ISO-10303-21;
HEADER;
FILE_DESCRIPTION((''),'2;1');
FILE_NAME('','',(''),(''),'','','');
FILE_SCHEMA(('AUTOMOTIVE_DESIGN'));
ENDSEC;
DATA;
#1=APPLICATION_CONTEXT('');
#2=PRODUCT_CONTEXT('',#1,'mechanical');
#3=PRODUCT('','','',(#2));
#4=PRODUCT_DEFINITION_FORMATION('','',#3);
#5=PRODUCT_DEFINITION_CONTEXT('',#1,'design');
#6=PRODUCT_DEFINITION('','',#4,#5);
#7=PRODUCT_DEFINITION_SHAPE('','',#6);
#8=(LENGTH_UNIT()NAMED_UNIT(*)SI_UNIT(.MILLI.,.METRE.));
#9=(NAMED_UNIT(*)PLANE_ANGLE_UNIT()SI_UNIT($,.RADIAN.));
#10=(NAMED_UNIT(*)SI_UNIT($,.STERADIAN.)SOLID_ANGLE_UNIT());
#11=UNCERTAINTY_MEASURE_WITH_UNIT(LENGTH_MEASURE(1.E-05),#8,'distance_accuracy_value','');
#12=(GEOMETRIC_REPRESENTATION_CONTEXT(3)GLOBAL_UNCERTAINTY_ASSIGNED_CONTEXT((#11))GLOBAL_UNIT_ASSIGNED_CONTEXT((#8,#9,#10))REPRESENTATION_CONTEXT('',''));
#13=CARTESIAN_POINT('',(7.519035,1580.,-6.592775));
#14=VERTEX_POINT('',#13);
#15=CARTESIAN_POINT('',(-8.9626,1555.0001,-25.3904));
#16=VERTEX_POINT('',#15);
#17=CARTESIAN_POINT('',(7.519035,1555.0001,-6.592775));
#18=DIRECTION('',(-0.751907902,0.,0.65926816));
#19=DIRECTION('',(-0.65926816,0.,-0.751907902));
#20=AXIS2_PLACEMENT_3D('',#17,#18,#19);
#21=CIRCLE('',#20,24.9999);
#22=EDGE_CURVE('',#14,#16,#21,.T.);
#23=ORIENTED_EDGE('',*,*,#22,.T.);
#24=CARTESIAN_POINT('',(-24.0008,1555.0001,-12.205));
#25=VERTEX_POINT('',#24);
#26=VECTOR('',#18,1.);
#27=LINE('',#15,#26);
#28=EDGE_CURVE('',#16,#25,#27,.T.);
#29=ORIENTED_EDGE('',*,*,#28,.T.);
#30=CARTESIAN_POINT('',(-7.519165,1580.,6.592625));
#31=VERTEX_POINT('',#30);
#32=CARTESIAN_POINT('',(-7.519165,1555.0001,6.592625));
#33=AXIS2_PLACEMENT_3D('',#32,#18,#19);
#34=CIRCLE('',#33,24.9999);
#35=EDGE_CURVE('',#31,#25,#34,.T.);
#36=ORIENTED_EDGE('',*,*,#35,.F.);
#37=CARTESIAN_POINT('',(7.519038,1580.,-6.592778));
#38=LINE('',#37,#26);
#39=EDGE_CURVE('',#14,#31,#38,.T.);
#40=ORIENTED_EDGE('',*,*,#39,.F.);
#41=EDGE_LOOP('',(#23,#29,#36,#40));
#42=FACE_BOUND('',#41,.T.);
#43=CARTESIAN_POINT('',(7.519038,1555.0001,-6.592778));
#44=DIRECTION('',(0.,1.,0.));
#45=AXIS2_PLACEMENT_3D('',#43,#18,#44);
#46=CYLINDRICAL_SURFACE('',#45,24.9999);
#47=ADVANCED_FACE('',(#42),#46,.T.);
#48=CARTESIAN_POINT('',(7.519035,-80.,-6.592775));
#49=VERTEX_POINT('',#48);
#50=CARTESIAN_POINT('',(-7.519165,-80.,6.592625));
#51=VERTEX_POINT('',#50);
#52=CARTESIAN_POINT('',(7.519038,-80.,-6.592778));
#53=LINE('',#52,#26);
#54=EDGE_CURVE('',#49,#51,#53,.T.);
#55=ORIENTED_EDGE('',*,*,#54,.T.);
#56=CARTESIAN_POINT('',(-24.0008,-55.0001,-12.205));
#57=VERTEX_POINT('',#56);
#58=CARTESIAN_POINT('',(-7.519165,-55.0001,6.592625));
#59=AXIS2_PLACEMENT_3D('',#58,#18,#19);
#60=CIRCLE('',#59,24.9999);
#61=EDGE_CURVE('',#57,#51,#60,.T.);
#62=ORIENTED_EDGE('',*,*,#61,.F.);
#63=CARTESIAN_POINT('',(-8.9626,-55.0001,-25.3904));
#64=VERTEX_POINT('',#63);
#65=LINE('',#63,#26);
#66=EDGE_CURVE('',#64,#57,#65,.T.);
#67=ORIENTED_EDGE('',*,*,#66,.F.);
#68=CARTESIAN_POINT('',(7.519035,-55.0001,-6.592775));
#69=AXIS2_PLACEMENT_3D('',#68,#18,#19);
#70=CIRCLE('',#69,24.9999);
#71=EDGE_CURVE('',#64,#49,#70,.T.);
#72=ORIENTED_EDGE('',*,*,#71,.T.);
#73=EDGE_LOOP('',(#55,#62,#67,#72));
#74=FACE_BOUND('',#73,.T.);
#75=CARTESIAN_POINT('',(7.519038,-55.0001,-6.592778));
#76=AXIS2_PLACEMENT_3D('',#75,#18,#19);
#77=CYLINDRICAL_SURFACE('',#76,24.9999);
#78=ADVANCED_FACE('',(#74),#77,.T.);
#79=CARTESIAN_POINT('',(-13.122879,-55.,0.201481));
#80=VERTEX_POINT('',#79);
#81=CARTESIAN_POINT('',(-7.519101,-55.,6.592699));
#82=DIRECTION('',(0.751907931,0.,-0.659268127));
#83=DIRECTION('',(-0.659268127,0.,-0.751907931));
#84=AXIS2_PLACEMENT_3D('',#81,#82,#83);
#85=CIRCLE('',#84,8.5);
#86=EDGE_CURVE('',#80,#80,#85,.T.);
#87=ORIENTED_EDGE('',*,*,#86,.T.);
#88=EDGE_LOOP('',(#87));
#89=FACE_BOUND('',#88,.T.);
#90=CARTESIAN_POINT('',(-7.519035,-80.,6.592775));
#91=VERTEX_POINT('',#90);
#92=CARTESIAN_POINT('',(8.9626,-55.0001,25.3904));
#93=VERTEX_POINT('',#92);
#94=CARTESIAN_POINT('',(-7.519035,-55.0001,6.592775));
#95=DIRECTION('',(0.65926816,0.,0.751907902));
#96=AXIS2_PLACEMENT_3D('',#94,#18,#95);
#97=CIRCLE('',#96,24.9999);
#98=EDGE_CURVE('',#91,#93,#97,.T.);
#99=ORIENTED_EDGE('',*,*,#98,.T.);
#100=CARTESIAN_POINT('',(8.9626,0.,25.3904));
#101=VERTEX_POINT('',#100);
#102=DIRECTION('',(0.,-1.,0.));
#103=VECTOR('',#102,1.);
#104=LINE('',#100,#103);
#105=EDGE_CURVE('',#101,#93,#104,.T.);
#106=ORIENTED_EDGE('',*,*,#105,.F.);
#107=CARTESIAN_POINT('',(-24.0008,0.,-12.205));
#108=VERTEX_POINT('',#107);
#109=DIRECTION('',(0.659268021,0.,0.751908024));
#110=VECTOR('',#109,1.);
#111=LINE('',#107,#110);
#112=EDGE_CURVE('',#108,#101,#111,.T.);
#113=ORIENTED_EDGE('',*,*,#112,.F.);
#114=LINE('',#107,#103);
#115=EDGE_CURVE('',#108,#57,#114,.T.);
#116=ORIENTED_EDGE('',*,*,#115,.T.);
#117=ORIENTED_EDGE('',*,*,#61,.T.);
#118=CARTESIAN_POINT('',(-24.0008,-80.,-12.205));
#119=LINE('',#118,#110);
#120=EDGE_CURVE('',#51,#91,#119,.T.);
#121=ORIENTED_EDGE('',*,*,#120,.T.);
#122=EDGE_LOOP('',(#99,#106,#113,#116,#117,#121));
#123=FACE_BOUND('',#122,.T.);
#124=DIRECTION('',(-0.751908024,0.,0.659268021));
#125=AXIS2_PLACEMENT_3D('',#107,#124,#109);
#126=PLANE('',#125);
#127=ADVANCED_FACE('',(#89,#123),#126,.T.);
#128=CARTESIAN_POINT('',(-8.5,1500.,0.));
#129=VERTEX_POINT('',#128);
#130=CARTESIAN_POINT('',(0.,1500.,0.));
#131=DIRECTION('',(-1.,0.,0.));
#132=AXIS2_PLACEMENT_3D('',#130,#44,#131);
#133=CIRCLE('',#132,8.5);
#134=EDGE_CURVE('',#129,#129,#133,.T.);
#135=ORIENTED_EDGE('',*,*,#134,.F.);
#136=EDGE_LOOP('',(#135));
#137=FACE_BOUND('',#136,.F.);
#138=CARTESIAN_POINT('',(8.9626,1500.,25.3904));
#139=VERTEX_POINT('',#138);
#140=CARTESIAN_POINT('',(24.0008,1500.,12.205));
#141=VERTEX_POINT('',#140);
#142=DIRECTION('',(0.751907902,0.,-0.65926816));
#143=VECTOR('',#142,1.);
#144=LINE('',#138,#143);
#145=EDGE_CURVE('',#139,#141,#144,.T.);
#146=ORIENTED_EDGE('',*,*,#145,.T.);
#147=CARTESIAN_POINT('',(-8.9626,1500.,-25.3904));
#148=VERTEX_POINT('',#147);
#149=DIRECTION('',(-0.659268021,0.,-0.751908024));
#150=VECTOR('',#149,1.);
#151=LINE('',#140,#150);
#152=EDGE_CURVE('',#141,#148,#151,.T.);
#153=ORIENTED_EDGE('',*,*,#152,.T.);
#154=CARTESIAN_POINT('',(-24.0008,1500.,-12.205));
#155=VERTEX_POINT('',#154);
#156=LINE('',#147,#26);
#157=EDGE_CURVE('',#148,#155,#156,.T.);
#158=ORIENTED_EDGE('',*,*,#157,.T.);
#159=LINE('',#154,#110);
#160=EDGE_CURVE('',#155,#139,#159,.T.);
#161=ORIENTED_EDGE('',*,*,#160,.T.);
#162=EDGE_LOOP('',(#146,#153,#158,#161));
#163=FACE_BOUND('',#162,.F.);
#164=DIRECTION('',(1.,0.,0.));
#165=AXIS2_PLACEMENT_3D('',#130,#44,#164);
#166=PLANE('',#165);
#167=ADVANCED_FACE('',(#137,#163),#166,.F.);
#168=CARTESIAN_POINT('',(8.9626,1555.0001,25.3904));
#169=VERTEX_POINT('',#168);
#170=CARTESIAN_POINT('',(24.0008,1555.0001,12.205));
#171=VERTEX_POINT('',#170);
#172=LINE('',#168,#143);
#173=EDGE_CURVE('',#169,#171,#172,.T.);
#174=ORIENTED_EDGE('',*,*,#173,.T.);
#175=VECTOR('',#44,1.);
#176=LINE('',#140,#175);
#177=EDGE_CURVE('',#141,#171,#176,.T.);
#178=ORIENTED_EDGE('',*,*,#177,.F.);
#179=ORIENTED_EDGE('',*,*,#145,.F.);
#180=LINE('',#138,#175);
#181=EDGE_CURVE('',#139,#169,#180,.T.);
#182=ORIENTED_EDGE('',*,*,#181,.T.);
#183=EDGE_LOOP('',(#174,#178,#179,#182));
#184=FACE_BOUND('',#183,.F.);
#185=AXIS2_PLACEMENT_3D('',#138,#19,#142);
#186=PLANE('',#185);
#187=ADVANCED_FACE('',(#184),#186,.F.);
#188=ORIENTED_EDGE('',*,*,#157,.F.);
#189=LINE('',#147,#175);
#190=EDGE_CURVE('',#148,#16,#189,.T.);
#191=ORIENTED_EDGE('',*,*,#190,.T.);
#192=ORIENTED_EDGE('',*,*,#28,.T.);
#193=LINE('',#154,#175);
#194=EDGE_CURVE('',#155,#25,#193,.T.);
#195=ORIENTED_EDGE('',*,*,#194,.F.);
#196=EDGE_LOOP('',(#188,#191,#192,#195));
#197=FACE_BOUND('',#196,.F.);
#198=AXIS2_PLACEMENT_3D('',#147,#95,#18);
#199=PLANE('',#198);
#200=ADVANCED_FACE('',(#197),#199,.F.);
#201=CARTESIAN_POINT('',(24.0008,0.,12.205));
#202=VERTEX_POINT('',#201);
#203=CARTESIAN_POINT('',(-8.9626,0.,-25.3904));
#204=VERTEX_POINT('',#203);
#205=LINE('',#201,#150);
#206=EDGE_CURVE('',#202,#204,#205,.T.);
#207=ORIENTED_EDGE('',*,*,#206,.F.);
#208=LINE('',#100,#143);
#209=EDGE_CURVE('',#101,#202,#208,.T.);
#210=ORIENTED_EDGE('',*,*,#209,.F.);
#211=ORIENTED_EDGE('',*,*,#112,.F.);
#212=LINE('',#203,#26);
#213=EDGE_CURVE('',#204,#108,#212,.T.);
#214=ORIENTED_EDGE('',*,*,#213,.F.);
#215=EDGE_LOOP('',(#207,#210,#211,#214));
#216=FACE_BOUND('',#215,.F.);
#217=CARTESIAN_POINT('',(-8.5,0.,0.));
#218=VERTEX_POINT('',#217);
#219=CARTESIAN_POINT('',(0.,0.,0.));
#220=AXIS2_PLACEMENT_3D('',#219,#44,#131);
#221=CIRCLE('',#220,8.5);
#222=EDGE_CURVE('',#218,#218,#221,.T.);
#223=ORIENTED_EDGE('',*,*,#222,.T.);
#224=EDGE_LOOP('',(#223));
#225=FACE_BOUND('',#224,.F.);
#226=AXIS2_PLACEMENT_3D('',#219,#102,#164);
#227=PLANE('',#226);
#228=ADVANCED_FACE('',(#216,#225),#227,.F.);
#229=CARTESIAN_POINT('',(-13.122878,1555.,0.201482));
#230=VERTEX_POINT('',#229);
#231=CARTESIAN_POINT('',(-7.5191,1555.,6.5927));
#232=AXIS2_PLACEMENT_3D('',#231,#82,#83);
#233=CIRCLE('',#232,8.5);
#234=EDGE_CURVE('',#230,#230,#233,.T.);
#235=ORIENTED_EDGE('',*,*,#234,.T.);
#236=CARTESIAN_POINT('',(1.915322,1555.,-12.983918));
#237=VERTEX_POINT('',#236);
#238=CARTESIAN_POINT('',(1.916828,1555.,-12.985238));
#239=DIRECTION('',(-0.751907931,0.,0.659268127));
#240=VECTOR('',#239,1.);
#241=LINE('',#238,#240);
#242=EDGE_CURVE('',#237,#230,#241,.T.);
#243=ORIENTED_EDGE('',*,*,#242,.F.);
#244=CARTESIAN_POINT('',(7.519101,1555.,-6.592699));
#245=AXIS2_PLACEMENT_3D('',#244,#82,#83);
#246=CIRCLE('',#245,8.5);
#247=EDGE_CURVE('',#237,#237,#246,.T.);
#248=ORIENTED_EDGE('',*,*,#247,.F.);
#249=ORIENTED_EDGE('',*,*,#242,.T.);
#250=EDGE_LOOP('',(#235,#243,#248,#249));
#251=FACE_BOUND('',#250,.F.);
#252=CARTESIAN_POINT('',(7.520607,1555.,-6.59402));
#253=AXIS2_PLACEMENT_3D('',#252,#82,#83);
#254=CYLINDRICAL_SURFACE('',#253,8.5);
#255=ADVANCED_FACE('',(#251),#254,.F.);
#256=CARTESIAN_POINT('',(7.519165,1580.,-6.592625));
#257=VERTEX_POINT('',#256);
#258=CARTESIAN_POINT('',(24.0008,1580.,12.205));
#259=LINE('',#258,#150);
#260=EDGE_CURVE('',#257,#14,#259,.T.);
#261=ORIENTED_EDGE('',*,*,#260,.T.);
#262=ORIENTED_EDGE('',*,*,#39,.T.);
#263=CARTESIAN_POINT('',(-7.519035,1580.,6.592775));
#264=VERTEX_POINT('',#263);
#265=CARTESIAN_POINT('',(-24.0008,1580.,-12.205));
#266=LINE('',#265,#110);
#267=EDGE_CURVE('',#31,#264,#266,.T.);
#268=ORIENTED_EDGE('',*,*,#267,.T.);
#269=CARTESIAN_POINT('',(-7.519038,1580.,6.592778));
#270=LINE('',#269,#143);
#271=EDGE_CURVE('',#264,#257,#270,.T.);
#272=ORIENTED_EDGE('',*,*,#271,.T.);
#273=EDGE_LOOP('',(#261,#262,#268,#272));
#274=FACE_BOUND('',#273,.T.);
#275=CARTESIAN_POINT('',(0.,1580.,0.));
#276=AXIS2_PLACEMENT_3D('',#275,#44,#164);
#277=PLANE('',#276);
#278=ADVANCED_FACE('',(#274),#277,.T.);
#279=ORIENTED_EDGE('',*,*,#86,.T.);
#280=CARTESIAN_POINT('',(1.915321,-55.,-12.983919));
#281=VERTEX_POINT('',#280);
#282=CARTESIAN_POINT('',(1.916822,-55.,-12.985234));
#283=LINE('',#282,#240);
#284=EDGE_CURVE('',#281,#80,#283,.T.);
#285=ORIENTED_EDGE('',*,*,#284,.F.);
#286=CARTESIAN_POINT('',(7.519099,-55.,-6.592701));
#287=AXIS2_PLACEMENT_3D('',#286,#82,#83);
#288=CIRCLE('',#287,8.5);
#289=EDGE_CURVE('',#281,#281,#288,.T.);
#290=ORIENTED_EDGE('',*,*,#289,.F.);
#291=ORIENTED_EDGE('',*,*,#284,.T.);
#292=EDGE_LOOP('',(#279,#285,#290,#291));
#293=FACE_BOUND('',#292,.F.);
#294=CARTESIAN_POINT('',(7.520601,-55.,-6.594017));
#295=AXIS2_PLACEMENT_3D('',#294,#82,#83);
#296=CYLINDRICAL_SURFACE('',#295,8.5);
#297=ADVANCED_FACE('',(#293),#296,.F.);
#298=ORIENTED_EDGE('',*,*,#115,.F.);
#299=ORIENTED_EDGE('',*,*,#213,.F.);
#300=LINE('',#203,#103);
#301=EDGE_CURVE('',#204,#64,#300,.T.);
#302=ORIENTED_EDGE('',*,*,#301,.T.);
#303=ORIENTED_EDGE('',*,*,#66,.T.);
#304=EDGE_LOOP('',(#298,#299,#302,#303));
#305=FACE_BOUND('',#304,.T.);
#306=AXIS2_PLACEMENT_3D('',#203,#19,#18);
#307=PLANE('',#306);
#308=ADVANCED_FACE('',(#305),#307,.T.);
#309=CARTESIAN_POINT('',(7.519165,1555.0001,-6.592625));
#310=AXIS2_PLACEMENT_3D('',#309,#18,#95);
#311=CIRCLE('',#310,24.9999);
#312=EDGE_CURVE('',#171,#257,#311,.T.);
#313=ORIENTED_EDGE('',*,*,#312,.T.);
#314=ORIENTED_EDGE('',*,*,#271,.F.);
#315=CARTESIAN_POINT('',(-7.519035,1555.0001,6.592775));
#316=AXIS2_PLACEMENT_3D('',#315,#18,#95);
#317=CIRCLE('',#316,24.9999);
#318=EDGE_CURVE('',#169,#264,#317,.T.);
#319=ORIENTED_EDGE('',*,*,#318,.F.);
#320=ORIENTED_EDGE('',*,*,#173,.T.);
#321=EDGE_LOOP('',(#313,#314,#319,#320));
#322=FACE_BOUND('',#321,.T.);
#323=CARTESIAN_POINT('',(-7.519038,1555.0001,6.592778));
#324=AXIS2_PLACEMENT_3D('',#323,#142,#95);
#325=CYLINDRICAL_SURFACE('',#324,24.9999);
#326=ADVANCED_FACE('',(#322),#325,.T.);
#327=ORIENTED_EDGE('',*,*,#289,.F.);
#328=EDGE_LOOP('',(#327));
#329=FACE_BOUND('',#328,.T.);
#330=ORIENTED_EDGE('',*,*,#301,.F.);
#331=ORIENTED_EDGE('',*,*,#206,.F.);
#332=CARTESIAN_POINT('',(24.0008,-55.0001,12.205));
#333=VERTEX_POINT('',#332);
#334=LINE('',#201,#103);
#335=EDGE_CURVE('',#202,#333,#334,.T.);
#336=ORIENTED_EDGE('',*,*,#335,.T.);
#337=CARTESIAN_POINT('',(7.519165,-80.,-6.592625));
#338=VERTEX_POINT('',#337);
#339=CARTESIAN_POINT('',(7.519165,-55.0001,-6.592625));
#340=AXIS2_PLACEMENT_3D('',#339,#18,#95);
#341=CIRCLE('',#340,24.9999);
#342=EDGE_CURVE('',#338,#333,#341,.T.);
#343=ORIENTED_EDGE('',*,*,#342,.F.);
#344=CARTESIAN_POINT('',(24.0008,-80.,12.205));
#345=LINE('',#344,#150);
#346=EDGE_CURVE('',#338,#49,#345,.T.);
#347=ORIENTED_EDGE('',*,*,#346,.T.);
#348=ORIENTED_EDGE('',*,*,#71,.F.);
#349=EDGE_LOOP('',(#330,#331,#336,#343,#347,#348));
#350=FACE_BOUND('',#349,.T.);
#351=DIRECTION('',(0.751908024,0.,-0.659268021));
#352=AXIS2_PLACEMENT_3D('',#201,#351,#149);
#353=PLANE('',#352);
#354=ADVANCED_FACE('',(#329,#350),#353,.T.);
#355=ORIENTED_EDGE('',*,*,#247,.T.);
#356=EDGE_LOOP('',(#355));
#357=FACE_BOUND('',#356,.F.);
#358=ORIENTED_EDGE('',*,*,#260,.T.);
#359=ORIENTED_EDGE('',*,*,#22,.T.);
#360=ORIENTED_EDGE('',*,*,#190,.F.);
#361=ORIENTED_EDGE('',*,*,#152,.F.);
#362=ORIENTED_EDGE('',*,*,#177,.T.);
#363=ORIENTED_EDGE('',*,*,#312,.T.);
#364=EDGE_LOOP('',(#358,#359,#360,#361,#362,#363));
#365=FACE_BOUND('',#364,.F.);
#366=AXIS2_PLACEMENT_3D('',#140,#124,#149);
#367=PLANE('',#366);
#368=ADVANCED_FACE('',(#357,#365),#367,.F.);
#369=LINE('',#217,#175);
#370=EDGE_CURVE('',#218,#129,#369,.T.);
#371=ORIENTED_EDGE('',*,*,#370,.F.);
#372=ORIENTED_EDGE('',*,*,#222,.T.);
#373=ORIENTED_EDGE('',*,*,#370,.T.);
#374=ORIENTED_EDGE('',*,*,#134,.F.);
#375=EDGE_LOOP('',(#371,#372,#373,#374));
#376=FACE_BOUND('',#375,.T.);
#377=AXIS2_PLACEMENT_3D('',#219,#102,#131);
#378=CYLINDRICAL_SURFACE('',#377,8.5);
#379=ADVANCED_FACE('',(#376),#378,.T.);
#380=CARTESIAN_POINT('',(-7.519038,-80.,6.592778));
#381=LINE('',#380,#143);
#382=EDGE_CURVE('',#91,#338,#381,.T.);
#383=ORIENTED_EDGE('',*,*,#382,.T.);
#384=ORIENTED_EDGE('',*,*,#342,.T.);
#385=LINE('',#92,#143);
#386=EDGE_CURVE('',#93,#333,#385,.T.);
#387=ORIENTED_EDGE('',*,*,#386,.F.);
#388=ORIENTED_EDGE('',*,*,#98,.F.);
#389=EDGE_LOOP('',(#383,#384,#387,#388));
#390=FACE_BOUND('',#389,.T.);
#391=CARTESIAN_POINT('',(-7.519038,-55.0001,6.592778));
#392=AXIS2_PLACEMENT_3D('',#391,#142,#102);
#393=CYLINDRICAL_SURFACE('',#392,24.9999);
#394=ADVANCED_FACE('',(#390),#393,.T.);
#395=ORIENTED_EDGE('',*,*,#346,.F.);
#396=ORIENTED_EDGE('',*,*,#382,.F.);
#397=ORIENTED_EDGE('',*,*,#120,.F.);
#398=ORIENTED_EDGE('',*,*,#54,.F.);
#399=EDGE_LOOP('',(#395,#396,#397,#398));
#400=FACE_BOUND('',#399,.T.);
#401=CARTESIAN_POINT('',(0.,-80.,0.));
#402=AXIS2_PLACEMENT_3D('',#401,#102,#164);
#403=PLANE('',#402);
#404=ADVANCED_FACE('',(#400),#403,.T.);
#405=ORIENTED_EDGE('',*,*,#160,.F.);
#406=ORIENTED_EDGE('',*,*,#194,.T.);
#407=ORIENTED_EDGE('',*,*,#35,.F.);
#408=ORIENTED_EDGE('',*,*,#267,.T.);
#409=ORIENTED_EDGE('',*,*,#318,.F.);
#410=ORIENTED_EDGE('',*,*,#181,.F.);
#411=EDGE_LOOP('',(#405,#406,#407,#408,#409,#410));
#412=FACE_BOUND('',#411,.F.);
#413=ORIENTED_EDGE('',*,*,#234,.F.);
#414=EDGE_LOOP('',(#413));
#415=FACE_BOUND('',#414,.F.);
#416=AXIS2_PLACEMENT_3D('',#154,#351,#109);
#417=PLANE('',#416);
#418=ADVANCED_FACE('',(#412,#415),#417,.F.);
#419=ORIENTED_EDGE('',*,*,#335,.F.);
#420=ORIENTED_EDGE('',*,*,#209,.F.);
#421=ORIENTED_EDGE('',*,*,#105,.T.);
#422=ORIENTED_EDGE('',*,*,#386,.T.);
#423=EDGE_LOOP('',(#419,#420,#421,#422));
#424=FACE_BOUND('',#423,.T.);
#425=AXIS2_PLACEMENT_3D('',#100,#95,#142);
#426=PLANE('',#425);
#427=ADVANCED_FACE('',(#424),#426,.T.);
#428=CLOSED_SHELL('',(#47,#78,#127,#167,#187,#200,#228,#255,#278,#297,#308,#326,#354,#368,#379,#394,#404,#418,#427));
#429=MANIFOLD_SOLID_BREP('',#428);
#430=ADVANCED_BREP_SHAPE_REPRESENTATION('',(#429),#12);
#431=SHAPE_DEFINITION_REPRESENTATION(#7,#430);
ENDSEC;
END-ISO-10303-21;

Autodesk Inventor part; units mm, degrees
ref_plane "YZ Plane" through (0, 0, 0) normal (1, 0, 0) x (0, 1, 0)
ref_plane "XZ Plane" through (0, 0, 0) normal (0, 1, 0) x (-1, 0, 0)
ref_plane "XY Plane" through (0, 0, 0) normal (0, 0, 1) x (1, 0, 0)
sketch "Boceto1" plane through (0, 0, 0) normal (0, 1, 0) x (-1, 0, 0)
  circle A0 centre (0, 0) radius 8.5
  dimension "d0" = 17
extrude "Extrusión1" add sketch "Boceto1" along normal blind 1500
sketch "Boceto2" plane through (0, 1500, 0) normal (0, 1, 0) x (1, 0, 0)
  line L0 (24.0008, -12.205) -> (-8.9626, 25.3904)
  line L1 (-8.9626, 25.3904) -> (-24.0008, 12.205)
  line L2 (-24.0008, 12.205) -> (8.9626, -25.3904)
  line L3 (8.9626, -25.3904) -> (24.0008, -12.205)
  line L4 (24.0008, -12.205) -> (-24.0008, 12.205) construction
  line L5 (-8.9626, 25.3904) -> (8.9626, -25.3904) construction
  point P0 (0, 0)
  dimension "d3" = 20
  dimension "d4" = 50
extrude "Extrusión2" add sketch "Boceto2" along normal blind 80
sketch "Boceto3" plane through (-8.9626, 1500, -25.3904) normal (0.7519079, 0, -0.6592681) x (-0.6592681, 0, -0.7519079)
  circle A0 centre (-25, 55) radius 8.5
  line L0 (-50, 80) -> (0, 80) projected
  line L1 (0, 0) -> (0, 80) projected
  point P0 (-25, -1500)
  dimension "d7" = 17
  dimension "d8" = 25
  dimension "d9" = 25
extrude "Extrusión3" cut sketch "Boceto3" against normal blind 80
fillet "Empalme1" radius 25 2 edges at (-16.4817, 1580, -18.7977) (16.4817, 1580, 18.7977)
sketch "Boceto4" plane through (0, 0, 0) normal (0, -1, 0) x (1, 0, 0)
  line L0 (-8.9626, -25.3904) -> (-24.0008, -12.205) projected
  line L1 (24.0008, 12.205) -> (-8.9626, -25.3904) projected
  line L2 (8.9626, 25.3904) -> (24.0008, 12.205) projected
  line L3 (-24.0008, -12.205) -> (8.9626, 25.3904) projected
  circle A0 centre (0, 0) radius 8.5 projected
  line L4 (24.0008, 12.205) -> (-8.9626, -25.3904) projected
  line L5 (24.0008, 12.205) -> (-8.9626, -25.3904)
  line L6 (-8.9626, -25.3904) -> (-24.0008, -12.205) projected
  line L7 (-8.9626, -25.3904) -> (-24.0008, -12.205)
  line L8 (-24.0008, -12.205) -> (8.9626, 25.3904) projected
  line L9 (-24.0008, -12.205) -> (8.9626, 25.3904)
  line L10 (8.9626, 25.3904) -> (24.0008, 12.205) projected
  line L11 (8.9626, 25.3904) -> (24.0008, 12.205)
extrude "Extrusión4" add sketch "Boceto4" along normal blind 80 contours L0 L3 L2 L1 | A0
sketch "Boceto5" plane through (24.0008, -80, 12.205) normal (0.7519079, 0, -0.6592681) x (-0.6592681, 0, -0.7519079)
  circle A0 centre (25, 25) radius 8.5
  line L0 (0, 80) -> (0, 0) projected
  line L1 (50, 0) -> (0, 0) projected
  point P0 (25, 80)
  dimension "d15" = 17
  dimension "d16" = 25
  dimension "d17" = 25
extrude "Extrusión5" cut sketch "Boceto5" against normal blind 80
fillet "Empalme2" radius 25 2 edges at (-16.4817, -80, -18.7977) (16.4817, -80, 18.7977)
properties part number "04_10 Cable" material "Acero ASTM A36"
